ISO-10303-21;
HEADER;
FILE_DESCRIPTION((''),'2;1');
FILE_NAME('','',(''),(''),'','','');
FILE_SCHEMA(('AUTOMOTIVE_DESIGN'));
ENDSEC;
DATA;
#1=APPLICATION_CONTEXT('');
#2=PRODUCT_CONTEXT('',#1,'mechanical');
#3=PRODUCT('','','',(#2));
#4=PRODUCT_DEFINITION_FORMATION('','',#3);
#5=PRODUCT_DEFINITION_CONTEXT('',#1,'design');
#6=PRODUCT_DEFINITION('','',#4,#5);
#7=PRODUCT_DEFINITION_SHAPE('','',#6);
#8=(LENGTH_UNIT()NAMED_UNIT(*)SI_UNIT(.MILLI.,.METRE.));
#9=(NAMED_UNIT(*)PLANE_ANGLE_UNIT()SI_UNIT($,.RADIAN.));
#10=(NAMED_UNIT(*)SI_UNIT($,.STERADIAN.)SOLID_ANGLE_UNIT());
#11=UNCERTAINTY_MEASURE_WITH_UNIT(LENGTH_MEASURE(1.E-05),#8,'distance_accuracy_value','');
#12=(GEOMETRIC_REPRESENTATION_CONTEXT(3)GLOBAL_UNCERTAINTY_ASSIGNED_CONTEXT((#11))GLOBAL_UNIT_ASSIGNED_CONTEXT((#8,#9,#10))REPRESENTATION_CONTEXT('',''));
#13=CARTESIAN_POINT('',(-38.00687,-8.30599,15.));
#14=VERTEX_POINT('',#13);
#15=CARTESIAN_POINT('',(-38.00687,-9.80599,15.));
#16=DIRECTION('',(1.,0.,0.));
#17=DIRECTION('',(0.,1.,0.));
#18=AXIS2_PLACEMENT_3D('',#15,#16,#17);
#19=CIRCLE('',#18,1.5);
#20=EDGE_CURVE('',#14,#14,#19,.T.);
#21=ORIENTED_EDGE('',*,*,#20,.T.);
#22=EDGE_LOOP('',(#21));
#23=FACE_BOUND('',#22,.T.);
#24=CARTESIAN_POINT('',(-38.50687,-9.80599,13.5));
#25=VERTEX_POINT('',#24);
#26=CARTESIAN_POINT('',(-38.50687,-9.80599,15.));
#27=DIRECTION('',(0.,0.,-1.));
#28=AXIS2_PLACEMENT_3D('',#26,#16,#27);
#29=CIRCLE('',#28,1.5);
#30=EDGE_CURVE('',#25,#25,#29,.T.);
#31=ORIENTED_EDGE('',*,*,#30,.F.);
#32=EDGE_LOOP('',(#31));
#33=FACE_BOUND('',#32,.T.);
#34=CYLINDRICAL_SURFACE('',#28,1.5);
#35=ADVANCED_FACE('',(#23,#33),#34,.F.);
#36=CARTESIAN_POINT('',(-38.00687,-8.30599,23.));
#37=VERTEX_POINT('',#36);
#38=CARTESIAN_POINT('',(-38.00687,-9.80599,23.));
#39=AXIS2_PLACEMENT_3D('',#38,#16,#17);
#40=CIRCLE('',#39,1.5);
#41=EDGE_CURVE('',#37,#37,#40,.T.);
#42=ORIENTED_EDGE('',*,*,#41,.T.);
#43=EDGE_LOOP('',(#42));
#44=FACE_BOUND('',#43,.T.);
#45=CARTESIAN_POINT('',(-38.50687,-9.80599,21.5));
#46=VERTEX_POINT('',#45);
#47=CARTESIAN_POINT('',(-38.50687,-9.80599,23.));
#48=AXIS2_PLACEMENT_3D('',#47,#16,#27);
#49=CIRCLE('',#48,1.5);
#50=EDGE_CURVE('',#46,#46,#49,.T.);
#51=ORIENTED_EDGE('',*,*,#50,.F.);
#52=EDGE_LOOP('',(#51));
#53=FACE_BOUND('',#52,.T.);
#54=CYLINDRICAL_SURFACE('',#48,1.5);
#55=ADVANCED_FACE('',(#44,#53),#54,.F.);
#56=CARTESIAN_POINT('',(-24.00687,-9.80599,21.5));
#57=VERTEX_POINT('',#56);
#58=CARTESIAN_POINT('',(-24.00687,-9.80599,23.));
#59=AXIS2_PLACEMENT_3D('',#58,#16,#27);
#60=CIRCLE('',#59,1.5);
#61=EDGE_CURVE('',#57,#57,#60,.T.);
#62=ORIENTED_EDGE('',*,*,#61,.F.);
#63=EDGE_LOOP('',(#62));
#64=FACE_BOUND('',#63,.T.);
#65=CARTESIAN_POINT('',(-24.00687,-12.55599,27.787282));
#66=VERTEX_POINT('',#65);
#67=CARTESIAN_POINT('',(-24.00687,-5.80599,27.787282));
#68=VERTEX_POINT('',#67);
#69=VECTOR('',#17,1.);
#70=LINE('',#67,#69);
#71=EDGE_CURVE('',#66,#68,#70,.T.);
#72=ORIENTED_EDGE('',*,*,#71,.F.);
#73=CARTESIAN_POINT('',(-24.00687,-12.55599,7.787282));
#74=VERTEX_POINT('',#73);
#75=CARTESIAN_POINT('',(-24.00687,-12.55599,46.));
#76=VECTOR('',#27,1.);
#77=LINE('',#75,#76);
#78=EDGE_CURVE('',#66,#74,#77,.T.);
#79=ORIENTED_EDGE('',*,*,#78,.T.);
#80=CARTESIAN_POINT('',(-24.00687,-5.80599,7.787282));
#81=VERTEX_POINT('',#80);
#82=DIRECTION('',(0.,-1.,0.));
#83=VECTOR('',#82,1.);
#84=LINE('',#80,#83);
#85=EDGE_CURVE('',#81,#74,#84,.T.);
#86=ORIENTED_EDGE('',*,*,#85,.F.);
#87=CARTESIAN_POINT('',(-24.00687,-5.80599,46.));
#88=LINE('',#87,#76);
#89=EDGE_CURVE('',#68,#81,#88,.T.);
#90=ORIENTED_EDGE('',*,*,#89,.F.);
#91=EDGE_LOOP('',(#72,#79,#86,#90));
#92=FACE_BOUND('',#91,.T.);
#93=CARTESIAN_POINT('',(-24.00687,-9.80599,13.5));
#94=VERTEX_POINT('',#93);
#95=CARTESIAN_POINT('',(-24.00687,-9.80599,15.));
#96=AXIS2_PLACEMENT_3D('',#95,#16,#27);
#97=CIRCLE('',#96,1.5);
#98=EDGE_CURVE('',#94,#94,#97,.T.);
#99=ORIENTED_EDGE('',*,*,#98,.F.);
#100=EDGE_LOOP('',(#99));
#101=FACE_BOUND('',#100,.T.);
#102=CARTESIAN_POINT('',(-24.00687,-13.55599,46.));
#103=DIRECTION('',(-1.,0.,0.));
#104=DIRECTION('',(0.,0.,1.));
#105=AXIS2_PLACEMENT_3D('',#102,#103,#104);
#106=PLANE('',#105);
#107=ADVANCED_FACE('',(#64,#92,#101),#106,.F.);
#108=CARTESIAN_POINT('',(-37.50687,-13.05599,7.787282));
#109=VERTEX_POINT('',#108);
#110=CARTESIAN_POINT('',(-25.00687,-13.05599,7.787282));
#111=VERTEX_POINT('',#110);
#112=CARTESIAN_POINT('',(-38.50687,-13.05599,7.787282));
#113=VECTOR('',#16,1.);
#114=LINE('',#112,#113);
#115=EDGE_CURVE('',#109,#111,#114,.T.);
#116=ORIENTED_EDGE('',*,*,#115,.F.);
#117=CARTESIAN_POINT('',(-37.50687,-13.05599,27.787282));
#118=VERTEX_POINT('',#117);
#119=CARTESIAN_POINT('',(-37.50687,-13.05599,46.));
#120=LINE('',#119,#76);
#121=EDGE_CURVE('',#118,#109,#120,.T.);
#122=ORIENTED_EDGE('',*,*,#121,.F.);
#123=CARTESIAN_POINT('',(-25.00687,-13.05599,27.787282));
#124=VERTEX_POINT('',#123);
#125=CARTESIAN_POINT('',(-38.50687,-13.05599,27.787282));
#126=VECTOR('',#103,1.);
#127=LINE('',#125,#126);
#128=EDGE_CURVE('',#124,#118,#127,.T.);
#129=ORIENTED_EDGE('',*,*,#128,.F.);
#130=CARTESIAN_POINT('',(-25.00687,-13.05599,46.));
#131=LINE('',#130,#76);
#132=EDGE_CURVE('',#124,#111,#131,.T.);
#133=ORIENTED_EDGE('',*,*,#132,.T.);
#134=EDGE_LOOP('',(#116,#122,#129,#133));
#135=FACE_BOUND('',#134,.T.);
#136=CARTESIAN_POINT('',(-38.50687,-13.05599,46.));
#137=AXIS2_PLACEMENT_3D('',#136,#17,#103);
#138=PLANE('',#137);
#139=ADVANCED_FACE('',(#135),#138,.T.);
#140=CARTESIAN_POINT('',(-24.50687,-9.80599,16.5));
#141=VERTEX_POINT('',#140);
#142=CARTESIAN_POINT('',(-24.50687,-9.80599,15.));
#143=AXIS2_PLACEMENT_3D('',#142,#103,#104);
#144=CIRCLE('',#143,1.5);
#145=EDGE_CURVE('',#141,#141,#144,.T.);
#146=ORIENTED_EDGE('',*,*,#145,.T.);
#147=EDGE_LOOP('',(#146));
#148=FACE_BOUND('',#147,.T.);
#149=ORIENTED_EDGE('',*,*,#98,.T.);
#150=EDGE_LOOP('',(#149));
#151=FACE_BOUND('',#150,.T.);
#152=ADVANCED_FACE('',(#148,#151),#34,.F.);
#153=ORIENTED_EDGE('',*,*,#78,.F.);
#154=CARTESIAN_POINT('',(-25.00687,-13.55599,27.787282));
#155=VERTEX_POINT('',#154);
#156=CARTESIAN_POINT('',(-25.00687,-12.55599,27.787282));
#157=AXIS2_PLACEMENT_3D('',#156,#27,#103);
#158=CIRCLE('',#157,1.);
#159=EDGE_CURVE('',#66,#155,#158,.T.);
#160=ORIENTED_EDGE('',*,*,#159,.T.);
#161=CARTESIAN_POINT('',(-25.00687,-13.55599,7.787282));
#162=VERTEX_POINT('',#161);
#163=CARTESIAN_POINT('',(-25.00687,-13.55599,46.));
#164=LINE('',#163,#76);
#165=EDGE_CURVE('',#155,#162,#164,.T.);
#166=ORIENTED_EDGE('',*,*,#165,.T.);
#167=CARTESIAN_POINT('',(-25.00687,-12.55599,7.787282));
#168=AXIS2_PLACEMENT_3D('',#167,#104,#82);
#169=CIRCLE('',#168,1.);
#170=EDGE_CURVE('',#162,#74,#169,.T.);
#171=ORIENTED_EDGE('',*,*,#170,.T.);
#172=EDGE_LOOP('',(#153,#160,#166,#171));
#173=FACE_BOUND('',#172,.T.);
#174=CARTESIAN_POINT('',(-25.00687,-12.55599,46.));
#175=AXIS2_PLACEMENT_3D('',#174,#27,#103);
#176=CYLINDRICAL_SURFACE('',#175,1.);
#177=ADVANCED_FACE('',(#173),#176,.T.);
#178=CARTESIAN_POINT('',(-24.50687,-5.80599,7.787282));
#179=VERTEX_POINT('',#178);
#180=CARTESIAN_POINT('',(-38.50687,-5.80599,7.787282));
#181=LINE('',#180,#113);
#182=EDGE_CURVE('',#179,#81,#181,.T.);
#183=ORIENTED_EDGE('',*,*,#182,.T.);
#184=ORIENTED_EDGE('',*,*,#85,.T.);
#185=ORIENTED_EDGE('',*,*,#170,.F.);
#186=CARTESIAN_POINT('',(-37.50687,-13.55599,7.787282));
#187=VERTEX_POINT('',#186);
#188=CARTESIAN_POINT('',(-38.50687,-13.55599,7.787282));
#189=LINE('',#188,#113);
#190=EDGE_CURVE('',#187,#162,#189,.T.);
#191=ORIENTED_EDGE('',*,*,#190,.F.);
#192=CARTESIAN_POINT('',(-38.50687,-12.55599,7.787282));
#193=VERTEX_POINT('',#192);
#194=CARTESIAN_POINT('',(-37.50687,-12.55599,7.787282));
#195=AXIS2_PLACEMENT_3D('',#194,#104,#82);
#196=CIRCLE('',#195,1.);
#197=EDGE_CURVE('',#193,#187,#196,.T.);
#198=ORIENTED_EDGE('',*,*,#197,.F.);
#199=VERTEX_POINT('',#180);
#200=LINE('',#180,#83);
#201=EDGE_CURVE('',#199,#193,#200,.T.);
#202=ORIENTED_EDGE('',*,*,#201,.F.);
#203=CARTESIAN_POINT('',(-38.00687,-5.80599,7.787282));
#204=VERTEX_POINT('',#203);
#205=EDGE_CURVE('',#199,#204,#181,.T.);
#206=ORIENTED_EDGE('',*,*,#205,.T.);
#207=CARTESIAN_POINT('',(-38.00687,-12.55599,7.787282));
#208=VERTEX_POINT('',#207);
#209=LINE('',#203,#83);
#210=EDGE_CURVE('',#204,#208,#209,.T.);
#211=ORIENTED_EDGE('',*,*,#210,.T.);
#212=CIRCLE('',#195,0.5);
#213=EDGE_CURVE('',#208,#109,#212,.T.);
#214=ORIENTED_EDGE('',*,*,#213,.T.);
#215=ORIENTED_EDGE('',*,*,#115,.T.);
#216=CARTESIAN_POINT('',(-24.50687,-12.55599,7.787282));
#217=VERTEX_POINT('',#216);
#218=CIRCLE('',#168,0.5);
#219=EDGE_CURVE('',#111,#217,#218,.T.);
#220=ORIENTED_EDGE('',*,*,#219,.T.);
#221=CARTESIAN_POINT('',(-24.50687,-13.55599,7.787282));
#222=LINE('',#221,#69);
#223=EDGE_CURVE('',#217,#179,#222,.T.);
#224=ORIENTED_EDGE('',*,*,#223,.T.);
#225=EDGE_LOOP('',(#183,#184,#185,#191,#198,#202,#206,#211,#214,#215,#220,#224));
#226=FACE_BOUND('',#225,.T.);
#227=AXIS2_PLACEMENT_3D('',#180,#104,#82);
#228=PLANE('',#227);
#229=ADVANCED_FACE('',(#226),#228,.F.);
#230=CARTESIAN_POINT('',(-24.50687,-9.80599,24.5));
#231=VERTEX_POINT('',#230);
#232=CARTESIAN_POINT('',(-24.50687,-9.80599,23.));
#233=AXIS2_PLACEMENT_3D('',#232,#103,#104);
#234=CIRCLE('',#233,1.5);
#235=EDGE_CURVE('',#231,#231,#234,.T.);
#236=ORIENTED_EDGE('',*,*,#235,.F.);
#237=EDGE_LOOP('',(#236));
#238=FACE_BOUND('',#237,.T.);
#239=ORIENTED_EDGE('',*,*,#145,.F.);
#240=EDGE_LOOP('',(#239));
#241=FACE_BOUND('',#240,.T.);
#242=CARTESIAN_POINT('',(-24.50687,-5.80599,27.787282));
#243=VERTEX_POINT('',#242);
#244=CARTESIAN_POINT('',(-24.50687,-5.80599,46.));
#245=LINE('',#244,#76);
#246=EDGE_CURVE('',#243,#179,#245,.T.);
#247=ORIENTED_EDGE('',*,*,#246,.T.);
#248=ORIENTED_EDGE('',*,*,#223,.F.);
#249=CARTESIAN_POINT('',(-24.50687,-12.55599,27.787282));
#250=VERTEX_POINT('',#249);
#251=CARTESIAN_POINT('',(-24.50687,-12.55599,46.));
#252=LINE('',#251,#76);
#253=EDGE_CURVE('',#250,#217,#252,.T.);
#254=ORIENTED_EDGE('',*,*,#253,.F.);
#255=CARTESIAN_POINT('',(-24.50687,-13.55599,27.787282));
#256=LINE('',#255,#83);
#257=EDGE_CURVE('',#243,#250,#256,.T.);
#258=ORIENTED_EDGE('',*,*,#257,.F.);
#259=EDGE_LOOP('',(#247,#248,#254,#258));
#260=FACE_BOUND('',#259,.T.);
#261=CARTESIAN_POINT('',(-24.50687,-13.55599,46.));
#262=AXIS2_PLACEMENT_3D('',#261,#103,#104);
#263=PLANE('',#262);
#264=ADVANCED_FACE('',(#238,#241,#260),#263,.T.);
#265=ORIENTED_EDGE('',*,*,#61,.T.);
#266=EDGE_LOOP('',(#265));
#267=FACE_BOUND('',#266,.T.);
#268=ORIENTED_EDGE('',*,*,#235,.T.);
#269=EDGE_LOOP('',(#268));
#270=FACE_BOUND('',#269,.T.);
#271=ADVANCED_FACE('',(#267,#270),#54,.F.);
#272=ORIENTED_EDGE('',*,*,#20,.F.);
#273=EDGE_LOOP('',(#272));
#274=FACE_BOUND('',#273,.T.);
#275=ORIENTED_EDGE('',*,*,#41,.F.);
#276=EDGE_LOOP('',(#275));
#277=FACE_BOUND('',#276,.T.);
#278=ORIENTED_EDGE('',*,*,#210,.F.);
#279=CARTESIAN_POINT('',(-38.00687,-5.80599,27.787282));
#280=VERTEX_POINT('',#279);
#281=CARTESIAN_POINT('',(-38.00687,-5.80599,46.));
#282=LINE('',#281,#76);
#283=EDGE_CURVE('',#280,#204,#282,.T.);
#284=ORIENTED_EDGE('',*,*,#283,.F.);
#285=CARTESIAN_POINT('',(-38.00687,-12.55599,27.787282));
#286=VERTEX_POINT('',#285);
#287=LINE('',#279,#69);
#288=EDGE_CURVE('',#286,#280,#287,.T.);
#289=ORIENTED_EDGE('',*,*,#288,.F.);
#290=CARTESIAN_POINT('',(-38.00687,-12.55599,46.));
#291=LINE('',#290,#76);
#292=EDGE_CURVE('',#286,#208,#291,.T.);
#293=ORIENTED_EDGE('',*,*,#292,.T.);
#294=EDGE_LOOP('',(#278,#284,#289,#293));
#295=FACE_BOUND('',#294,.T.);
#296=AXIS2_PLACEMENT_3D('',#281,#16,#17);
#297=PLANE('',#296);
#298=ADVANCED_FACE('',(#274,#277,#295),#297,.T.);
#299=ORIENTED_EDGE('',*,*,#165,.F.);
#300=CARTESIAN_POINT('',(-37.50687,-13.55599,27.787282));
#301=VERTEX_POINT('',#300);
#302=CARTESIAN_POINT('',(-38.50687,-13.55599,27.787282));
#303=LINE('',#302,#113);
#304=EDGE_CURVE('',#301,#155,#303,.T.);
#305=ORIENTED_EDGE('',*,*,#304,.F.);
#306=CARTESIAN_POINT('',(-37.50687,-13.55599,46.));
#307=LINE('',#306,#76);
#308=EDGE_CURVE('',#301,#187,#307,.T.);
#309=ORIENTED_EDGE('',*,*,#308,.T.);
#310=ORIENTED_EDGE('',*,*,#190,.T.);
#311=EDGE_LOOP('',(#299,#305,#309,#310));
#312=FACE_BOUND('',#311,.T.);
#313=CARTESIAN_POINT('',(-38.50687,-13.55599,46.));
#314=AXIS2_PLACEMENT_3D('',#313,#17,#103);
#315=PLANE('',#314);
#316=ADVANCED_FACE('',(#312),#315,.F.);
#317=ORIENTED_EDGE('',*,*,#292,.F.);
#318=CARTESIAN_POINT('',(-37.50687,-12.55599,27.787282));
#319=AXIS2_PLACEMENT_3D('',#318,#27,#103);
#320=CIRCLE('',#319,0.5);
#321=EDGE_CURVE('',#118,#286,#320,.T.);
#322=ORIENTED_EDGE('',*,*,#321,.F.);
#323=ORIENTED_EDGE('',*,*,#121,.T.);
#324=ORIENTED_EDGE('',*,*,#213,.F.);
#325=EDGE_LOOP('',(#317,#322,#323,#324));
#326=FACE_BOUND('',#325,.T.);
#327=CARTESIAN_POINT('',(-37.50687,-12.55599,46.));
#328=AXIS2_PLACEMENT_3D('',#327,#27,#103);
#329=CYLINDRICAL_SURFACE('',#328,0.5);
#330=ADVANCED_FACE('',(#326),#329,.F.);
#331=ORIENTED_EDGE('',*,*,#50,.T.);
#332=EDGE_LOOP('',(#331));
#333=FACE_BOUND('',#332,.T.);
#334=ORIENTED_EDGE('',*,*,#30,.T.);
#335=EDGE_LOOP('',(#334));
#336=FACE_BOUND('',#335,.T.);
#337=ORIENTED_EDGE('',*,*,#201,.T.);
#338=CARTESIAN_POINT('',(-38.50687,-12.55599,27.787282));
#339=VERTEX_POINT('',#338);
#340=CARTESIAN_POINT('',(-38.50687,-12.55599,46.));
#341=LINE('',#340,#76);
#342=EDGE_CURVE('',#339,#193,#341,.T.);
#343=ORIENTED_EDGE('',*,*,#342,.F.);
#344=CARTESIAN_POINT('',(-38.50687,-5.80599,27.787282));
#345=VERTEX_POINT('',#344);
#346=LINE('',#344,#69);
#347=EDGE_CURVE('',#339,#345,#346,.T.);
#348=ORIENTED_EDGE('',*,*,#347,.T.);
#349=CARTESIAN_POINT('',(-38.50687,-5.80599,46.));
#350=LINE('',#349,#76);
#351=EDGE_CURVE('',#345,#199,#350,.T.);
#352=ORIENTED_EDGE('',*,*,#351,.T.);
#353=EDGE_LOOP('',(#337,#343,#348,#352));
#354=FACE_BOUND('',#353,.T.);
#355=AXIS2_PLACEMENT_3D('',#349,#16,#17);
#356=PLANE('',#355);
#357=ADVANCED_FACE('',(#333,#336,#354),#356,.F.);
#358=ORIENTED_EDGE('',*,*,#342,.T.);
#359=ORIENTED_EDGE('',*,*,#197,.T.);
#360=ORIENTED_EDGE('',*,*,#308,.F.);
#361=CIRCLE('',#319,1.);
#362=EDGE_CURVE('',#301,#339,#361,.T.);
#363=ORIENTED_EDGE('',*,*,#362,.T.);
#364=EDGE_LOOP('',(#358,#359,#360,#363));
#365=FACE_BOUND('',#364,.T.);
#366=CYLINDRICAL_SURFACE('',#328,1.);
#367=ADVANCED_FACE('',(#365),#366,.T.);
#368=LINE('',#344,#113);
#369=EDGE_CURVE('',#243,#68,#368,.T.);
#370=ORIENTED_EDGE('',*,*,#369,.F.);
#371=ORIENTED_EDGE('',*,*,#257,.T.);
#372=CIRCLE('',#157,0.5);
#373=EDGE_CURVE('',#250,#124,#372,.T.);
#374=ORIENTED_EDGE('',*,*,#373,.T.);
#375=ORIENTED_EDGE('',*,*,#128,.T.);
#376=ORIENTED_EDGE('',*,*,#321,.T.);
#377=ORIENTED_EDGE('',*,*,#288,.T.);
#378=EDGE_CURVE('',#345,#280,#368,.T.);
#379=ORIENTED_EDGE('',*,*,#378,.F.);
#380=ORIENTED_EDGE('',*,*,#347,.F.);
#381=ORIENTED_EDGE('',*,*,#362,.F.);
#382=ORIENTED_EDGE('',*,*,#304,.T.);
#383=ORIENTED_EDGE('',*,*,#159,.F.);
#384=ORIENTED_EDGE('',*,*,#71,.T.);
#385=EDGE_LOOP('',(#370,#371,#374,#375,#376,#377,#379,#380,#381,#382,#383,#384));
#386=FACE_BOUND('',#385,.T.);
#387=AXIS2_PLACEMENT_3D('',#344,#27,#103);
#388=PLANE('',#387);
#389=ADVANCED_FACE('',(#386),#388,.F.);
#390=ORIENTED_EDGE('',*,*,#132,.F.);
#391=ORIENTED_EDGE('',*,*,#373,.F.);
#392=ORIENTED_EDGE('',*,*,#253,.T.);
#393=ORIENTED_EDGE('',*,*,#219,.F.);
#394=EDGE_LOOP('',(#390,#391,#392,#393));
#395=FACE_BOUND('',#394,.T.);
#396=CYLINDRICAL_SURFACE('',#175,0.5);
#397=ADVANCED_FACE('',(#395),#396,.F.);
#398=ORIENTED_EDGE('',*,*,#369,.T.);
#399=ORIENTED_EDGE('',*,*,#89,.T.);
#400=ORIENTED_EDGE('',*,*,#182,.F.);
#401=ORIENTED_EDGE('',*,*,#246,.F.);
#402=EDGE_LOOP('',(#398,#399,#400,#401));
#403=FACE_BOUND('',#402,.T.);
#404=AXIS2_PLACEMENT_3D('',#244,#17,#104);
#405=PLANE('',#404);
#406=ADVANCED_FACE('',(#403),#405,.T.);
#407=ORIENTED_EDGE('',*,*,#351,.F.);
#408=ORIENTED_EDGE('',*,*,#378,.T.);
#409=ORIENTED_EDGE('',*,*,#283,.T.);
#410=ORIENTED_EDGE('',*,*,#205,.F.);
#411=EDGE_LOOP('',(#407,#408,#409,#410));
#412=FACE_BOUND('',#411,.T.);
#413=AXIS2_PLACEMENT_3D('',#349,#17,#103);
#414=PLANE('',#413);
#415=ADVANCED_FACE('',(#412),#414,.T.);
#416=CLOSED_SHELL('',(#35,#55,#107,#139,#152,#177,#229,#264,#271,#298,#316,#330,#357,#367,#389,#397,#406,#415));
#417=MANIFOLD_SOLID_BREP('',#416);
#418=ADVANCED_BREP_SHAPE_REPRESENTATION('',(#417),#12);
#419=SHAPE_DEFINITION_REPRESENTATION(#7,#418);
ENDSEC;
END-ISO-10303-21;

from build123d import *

# Parameters (mm, degrees)
BRIDA_BASE1_DEPTH     = 46
CROQUIS6_R            = 1.5
CROQUIS6_W            = 7.787282345
CROQUIS6_H            = 7.75
CROQUIS6_W_2          = 18.212717655
CORTAR_EXTRUIR2_DEPTH = 51.10004851


# Sheet-metal steps are written as plain solids
with BuildPart() as part:
    # Croquis1 → Brida base1 (new body)
    with BuildSketch(Plane.XY):
        with BuildLine():
            Line((-38.506869712, -5.805989848), (-38.506869712, -12.555989848))
            ThreePointArc((-38.506869712, -12.555989848), (-38.213976494, -13.263096629), (-37.506869712, -13.555989848))
            Line((-37.506869712, -13.555989848), (-25.006869712, -13.555989848))
            ThreePointArc((-25.006869712, -13.555989848), (-24.299762931, -13.263096629), (-24.006869712, -12.555989848))
            Line((-24.006869712, -12.555989848), (-24.006869712, -5.805989848))
            Line((-24.006869712, -5.805989848), (-24.506869712, -5.805989848))
            Line((-24.506869712, -5.805989848), (-24.506869712, -12.555989848))
            ThreePointArc((-24.506869712, -12.555989848), (-24.653316322, -12.909543238), (-25.006869712, -13.055989848))
            Line((-25.006869712, -13.055989848), (-37.506869712, -13.055989848))
            ThreePointArc((-37.506869712, -13.055989848), (-37.860423103, -12.909543238), (-38.006869712, -12.555989848))
            Line((-38.006869712, -12.555989848), (-38.006869712, -5.805989848))
            Line((-38.006869712, -5.805989848), (-38.506869712, -5.805989848))
        make_face()
    extrude(amount=BRIDA_BASE1_DEPTH)

    # Croquis6 → Cortar-Extruir2 (cut, through all)
    with BuildSketch(Plane(origin=(-24.006869712, 0, 0), x_dir=(0, 0, -1), z_dir=(1, 0, 0))):
        with Locations((-23, -9.805989848)):
            Circle(CROQUIS6_R)
        with Locations((-15, -9.805989848)):
            Circle(CROQUIS6_R)
        with Locations((-3.893641173, -9.680989848)):
            Rectangle(CROQUIS6_W, CROQUIS6_H)
        with Locations((-36.893641172, -9.680989848)):
            Rectangle(CROQUIS6_W_2, CROQUIS6_H)
    extrude(amount=-CORTAR_EXTRUIR2_DEPTH, mode=Mode.SUBTRACT)


solid = part.part
